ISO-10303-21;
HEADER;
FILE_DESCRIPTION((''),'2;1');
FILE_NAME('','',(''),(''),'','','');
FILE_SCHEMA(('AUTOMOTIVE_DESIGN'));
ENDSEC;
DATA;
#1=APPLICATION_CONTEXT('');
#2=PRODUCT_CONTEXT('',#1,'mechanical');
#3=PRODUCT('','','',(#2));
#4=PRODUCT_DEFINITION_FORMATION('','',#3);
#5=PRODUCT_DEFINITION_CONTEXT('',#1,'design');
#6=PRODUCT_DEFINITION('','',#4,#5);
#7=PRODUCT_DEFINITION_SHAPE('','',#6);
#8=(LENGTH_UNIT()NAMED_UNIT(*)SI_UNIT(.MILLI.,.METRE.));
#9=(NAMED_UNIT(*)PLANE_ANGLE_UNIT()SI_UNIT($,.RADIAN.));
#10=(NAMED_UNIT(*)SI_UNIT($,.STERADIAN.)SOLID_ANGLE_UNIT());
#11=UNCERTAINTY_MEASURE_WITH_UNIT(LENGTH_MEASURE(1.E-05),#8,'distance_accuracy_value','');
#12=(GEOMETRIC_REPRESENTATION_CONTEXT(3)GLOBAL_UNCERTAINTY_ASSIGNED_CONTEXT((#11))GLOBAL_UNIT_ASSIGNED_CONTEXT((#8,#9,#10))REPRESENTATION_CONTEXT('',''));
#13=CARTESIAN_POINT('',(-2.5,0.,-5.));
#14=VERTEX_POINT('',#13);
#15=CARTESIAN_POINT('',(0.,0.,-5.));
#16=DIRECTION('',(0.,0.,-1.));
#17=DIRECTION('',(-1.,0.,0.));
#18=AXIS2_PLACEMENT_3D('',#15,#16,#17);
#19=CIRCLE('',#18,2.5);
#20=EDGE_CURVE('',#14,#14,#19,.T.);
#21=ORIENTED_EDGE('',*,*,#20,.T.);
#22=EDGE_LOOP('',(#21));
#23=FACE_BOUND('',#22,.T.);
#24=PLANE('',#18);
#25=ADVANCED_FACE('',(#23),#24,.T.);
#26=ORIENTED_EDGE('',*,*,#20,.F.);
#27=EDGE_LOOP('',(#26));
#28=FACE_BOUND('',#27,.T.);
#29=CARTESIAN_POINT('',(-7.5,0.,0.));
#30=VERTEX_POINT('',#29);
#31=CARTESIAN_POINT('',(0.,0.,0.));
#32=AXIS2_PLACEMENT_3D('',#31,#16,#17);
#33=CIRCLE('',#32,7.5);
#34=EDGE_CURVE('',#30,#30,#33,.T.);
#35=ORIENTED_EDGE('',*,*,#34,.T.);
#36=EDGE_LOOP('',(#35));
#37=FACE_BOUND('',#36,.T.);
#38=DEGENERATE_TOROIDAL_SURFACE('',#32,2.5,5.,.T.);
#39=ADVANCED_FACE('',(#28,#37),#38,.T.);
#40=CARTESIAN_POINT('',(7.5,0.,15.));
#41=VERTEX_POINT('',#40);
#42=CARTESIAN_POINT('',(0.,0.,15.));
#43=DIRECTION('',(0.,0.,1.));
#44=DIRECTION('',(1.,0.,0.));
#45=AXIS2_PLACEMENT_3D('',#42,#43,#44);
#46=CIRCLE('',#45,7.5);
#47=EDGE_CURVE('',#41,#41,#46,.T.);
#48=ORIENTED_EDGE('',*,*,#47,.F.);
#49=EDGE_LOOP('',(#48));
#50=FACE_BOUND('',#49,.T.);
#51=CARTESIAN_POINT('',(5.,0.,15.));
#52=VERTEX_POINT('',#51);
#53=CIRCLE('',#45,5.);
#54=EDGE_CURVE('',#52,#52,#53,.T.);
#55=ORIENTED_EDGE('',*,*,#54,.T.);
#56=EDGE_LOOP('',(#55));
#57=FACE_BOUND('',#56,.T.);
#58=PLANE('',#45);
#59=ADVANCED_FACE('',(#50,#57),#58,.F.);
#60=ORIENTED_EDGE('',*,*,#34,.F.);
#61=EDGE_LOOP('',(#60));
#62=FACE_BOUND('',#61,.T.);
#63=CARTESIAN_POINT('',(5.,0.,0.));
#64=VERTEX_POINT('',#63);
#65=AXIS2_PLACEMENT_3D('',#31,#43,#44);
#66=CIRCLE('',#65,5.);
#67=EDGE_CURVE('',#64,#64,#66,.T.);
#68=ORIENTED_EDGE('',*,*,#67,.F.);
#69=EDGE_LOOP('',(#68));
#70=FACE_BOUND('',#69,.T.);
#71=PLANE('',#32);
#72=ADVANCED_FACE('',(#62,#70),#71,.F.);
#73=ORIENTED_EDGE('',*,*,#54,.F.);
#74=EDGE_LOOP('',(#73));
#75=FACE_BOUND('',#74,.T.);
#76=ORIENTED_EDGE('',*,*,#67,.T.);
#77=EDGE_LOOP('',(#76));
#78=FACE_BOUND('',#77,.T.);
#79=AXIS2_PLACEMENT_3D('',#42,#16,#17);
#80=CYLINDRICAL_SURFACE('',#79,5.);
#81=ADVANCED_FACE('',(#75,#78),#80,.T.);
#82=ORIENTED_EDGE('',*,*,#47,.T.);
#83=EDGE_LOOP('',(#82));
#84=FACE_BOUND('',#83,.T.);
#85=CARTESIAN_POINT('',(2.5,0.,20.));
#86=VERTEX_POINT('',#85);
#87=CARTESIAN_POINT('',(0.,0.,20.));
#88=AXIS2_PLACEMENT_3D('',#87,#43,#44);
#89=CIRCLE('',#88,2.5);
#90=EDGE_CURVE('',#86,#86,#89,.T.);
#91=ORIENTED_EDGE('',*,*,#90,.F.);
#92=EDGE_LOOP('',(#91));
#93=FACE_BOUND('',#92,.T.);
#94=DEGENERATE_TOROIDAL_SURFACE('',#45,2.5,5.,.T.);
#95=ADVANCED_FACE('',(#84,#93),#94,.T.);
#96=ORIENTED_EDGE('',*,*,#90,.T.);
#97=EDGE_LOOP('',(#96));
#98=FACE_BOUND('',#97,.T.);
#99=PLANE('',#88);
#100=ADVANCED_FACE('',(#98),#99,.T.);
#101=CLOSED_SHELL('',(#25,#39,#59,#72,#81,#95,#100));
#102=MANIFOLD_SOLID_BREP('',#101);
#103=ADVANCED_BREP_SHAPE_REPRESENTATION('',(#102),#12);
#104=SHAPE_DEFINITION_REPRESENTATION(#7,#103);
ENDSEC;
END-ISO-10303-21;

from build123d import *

# Parameters (mm, degrees)
IZIM1_R                     = 5
Y_KSEKLIK_EKSTR_ZYON1_DEPTH = 15
IZIM2_R                     = 7.5
Y_KSEKLIK_EKSTR_ZYON2_DEPTH = 5
RADYUS1_R                   = 5
Y_KSEKLIK_EKSTR_ZYON3_START = 5
IZIM3_R                     = 7.5
Y_KSEKLIK_EKSTR_ZYON3_DEPTH = 5
RADYUS2_R                   = 5


with BuildPart() as part:
    # Çizim1 → Yükseklik-Ekstrüzyon1 (new body)
    with BuildSketch(Plane.XY):
        Circle(IZIM1_R)
    extrude(amount=Y_KSEKLIK_EKSTR_ZYON1_DEPTH)

    # Çizim2 → Yükseklik-Ekstrüzyon2 (add)
    with BuildSketch(Plane.XY.offset(15)):
        Circle(IZIM2_R)
    extrude(amount=Y_KSEKLIK_EKSTR_ZYON2_DEPTH)

    # Radyus1
    radyus1_edges = [part.edges().sort_by_distance(p)[0] for p in [
        (-7.5, 0, 20),
    ]]
    fillet(radyus1_edges, radius=RADYUS1_R - 0.0001)  # a hair under: the kernel refuses the full size

    # Çizim3 → Yükseklik-Ekstrüzyon3 (add)
    with BuildSketch(Plane(origin=(0, 0, 0), x_dir=(-1, 0, 0), z_dir=(0, 0, -1)).offset(Y_KSEKLIK_EKSTR_ZYON3_START)):
        Circle(IZIM3_R)
    extrude(amount=-Y_KSEKLIK_EKSTR_ZYON3_DEPTH)

    # Radyus2
    radyus2_edges = [part.edges().sort_by_distance(p)[0] for p in [
        (7.5, 0, -5),
    ]]
    fillet(radyus2_edges, radius=RADYUS2_R - 0.0001)  # a hair under: the kernel refuses the full size


solid = part.part
